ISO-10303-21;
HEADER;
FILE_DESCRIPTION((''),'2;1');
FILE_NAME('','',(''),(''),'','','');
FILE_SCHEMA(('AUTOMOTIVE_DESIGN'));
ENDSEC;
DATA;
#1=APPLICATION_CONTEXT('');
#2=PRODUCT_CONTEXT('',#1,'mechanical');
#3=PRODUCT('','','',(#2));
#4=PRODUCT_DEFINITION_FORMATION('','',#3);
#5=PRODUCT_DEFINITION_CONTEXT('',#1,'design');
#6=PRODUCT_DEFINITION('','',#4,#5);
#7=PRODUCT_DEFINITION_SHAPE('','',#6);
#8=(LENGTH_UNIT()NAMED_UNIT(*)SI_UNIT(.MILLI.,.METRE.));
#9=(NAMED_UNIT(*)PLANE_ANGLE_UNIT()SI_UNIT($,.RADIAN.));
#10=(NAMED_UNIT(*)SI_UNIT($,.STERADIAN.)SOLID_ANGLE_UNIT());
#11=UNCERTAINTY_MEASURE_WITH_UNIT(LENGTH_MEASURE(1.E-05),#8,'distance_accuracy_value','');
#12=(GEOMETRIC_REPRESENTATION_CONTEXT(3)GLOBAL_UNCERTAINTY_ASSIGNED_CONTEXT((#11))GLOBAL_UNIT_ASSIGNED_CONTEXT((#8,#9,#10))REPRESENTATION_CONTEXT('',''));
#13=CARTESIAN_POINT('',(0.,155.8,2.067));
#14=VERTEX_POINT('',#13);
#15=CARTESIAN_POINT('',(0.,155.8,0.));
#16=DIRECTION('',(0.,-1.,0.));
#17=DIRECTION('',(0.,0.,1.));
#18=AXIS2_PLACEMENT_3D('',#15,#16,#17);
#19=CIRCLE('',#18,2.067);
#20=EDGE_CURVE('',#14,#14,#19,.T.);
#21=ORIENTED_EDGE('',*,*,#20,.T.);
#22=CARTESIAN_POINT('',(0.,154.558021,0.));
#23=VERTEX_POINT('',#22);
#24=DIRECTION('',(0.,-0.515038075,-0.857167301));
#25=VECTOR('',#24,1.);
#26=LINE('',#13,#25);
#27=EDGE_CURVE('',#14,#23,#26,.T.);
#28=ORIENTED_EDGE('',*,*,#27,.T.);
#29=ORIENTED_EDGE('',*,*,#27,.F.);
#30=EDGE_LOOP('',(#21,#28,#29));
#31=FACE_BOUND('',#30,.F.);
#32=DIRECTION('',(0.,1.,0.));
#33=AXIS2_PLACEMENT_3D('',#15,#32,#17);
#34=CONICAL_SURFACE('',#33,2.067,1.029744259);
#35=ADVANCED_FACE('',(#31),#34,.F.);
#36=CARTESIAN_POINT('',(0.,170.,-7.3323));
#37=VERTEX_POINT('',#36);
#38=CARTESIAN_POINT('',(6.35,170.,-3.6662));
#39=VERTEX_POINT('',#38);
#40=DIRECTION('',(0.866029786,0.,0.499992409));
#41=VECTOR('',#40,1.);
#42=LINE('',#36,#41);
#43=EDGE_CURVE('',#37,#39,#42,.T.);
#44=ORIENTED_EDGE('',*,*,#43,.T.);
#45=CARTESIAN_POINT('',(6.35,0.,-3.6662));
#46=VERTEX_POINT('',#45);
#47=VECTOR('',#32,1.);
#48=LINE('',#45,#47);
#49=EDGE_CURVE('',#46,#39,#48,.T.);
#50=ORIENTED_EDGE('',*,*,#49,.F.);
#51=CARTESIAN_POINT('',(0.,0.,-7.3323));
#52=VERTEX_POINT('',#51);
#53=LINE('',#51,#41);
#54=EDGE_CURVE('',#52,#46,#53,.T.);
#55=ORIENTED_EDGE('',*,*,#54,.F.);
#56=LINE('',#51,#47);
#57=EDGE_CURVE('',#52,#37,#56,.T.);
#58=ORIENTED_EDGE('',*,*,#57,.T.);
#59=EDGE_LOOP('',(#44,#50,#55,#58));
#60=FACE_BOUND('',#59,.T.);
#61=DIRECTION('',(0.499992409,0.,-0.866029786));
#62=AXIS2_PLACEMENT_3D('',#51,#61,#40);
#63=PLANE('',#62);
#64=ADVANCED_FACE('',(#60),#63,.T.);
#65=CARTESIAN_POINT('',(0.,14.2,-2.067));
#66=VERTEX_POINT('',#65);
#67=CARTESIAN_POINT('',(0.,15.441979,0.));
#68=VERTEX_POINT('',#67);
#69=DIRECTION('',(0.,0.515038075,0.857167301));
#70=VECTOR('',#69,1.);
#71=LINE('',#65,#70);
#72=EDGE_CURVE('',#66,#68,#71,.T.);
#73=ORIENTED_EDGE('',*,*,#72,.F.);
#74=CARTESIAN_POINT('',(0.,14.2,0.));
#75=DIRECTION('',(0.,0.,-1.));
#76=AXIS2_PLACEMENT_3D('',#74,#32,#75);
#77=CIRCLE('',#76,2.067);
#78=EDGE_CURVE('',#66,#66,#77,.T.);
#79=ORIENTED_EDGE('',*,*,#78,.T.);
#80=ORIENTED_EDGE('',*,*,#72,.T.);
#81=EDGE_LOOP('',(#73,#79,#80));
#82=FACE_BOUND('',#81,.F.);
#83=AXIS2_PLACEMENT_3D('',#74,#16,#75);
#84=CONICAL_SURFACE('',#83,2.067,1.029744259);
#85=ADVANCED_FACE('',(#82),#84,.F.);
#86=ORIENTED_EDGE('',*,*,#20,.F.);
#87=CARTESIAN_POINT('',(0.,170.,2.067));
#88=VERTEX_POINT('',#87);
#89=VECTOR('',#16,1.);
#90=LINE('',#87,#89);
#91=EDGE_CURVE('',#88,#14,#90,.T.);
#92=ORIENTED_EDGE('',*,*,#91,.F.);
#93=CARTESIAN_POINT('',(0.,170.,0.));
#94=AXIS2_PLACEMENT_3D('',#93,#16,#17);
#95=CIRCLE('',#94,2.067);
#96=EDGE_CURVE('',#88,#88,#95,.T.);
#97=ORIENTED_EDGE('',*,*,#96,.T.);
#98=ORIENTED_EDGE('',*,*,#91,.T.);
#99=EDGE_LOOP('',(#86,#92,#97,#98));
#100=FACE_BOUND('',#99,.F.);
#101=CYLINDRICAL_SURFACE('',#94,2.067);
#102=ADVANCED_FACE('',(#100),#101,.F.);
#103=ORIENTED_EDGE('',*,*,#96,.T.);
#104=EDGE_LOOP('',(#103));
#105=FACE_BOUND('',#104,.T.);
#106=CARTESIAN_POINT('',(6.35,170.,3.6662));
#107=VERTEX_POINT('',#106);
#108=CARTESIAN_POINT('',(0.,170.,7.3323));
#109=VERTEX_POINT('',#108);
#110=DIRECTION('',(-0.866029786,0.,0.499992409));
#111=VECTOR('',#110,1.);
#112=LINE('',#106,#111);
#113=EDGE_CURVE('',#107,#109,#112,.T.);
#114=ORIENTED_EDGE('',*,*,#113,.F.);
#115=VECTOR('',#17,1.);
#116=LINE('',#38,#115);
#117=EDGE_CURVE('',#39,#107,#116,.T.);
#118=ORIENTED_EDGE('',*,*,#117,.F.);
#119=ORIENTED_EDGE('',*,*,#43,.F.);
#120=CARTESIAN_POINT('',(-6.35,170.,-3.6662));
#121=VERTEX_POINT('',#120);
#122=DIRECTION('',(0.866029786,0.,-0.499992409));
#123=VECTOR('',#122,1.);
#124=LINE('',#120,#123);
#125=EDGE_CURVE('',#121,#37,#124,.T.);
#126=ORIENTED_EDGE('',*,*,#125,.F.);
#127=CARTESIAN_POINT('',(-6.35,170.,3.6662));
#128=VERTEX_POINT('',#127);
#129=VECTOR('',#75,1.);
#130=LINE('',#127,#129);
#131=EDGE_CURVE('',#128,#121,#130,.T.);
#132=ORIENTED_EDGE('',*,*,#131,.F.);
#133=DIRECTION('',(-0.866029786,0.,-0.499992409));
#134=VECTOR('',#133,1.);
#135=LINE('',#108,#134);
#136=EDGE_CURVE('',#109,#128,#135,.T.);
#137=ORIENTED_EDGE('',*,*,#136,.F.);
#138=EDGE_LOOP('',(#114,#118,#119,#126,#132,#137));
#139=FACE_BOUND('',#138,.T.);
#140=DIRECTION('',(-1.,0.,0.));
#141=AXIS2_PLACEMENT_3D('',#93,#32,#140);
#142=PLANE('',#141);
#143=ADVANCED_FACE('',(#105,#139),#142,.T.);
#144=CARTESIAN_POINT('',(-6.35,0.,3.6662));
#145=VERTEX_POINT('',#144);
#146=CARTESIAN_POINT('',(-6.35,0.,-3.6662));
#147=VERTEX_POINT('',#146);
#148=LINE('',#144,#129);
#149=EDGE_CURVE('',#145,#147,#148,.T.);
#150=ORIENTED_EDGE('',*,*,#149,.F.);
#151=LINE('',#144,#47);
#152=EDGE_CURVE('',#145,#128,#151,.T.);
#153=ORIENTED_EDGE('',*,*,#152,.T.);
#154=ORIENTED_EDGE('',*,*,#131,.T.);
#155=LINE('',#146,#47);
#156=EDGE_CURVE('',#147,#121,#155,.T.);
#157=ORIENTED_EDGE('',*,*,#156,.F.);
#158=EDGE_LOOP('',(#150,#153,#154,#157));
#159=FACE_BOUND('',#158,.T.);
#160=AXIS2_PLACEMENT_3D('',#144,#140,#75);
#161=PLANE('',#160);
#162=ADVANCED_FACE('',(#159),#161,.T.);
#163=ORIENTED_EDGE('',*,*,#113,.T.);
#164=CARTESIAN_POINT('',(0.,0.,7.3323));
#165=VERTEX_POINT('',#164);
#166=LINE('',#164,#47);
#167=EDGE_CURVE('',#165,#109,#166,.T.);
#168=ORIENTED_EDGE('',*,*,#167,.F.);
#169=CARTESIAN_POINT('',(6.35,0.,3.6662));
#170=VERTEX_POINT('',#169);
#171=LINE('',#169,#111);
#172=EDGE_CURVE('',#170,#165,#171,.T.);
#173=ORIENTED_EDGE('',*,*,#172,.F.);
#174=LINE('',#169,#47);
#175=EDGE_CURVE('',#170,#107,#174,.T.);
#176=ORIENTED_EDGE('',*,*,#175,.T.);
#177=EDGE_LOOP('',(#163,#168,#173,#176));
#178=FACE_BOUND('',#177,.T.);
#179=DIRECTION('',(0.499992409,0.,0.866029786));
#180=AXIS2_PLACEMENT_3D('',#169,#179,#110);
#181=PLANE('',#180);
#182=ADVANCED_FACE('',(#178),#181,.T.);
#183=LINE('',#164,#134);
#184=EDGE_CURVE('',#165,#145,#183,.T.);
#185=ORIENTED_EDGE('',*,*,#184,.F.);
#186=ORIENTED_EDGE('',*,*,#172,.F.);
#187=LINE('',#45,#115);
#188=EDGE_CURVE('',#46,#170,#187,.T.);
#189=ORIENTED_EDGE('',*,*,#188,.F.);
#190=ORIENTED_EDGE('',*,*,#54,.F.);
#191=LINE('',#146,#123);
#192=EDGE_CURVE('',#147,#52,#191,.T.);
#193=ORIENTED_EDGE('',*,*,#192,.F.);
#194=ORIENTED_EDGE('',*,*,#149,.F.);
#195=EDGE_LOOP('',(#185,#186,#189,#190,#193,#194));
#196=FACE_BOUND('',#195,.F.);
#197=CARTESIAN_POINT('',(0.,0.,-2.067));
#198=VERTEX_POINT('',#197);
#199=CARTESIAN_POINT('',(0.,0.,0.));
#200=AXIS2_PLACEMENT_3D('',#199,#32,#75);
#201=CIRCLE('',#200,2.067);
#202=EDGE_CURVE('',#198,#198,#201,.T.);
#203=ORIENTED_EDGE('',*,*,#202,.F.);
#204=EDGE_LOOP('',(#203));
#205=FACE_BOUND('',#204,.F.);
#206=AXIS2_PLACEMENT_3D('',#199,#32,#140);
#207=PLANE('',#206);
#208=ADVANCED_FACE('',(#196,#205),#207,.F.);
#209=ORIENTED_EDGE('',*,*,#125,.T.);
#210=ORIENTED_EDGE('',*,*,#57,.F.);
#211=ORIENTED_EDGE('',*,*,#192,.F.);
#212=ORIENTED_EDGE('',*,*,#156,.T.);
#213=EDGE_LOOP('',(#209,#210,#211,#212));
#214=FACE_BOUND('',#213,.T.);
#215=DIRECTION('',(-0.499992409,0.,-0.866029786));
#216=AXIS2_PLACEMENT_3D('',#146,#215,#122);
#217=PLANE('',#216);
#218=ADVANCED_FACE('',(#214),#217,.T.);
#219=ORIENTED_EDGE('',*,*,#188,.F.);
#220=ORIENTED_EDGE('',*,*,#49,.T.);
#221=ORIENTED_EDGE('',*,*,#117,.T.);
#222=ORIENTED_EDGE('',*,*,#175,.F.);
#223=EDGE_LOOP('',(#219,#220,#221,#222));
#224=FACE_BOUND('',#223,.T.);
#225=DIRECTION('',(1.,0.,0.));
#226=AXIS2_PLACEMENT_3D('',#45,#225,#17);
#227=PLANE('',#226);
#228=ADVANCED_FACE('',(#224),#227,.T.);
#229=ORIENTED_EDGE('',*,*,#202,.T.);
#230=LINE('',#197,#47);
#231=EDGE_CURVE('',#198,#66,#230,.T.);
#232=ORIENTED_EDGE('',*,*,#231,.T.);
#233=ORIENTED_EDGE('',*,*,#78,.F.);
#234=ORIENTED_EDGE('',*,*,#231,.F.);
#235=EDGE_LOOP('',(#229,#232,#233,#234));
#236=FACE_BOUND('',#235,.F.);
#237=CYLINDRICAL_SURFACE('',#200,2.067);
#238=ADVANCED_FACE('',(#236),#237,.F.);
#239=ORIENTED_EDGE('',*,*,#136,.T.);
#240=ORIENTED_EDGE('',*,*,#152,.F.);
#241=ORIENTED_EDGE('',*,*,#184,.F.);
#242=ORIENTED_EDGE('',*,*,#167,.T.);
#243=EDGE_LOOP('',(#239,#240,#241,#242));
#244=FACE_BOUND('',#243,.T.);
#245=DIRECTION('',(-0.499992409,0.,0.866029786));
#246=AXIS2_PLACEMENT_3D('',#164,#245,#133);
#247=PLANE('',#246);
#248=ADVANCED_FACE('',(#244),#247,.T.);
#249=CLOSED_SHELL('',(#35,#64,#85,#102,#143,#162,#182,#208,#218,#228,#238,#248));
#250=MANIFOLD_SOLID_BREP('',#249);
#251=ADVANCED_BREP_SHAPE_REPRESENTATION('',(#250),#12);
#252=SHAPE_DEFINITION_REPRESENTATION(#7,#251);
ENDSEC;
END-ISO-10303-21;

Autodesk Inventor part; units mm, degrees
ref_plane "YZ Plane" through (0, 0, 0) normal (1, 0, 0) x (0, 1, 0)
ref_plane "XZ Plane" through (0, 0, 0) normal (0, 1, 0) x (-1, 0, 0)
ref_plane "XY Plane" through (0, 0, 0) normal (0, 0, 1) x (1, 0, 0)
sketch "Sketch1" plane through (0, 0, 0) normal (0, 1, 0) x (-1, 0, 0)
  line L0 (0, -7.3323) -> (-6.35, -3.6662)
  line L1 (-6.35, -3.6662) -> (-6.35, 3.6662)
  line L2 (-6.35, 3.6662) -> (0, 7.3323)
  line L3 (0, 7.3323) -> (6.35, 3.6662)
  line L4 (6.35, 3.6662) -> (6.35, -3.6662)
  line L5 (6.35, -3.6662) -> (0, -7.3323)
  point P0 (0, 0)
  dimension "d19" = 12.7
extrude "Extrusion1" add sketch "Sketch1" along normal blind 170
sketch "Sketch5" plane through (0, 170, 0) normal (0, 1, 0) x (1, 0, 0)
  point P0 (0, 0)
  point P1 (0, 0)
hole "Hole3" at (0, 170, 0) direction (0, -1, 0) diameter 4.134 depth 14.2 tip angle 118 thread size "M5x0.8" class "6H" standard "ANSI Metric M Profile"
sketch "Sketch6" plane through (0, 0, 0) normal (0, -1, 0) x (1, 0, 0)
  point P0 (0, 0)
  point P1 (0, 0)
hole "Hole4" at (0, 0, 0) direction (0, 1, 0) diameter 4.134 depth 14.2 tip angle 118 thread size "M5x0.8" class "6H" standard "ANSI Metric M Profile"
properties part number "Adapter Standoff"
